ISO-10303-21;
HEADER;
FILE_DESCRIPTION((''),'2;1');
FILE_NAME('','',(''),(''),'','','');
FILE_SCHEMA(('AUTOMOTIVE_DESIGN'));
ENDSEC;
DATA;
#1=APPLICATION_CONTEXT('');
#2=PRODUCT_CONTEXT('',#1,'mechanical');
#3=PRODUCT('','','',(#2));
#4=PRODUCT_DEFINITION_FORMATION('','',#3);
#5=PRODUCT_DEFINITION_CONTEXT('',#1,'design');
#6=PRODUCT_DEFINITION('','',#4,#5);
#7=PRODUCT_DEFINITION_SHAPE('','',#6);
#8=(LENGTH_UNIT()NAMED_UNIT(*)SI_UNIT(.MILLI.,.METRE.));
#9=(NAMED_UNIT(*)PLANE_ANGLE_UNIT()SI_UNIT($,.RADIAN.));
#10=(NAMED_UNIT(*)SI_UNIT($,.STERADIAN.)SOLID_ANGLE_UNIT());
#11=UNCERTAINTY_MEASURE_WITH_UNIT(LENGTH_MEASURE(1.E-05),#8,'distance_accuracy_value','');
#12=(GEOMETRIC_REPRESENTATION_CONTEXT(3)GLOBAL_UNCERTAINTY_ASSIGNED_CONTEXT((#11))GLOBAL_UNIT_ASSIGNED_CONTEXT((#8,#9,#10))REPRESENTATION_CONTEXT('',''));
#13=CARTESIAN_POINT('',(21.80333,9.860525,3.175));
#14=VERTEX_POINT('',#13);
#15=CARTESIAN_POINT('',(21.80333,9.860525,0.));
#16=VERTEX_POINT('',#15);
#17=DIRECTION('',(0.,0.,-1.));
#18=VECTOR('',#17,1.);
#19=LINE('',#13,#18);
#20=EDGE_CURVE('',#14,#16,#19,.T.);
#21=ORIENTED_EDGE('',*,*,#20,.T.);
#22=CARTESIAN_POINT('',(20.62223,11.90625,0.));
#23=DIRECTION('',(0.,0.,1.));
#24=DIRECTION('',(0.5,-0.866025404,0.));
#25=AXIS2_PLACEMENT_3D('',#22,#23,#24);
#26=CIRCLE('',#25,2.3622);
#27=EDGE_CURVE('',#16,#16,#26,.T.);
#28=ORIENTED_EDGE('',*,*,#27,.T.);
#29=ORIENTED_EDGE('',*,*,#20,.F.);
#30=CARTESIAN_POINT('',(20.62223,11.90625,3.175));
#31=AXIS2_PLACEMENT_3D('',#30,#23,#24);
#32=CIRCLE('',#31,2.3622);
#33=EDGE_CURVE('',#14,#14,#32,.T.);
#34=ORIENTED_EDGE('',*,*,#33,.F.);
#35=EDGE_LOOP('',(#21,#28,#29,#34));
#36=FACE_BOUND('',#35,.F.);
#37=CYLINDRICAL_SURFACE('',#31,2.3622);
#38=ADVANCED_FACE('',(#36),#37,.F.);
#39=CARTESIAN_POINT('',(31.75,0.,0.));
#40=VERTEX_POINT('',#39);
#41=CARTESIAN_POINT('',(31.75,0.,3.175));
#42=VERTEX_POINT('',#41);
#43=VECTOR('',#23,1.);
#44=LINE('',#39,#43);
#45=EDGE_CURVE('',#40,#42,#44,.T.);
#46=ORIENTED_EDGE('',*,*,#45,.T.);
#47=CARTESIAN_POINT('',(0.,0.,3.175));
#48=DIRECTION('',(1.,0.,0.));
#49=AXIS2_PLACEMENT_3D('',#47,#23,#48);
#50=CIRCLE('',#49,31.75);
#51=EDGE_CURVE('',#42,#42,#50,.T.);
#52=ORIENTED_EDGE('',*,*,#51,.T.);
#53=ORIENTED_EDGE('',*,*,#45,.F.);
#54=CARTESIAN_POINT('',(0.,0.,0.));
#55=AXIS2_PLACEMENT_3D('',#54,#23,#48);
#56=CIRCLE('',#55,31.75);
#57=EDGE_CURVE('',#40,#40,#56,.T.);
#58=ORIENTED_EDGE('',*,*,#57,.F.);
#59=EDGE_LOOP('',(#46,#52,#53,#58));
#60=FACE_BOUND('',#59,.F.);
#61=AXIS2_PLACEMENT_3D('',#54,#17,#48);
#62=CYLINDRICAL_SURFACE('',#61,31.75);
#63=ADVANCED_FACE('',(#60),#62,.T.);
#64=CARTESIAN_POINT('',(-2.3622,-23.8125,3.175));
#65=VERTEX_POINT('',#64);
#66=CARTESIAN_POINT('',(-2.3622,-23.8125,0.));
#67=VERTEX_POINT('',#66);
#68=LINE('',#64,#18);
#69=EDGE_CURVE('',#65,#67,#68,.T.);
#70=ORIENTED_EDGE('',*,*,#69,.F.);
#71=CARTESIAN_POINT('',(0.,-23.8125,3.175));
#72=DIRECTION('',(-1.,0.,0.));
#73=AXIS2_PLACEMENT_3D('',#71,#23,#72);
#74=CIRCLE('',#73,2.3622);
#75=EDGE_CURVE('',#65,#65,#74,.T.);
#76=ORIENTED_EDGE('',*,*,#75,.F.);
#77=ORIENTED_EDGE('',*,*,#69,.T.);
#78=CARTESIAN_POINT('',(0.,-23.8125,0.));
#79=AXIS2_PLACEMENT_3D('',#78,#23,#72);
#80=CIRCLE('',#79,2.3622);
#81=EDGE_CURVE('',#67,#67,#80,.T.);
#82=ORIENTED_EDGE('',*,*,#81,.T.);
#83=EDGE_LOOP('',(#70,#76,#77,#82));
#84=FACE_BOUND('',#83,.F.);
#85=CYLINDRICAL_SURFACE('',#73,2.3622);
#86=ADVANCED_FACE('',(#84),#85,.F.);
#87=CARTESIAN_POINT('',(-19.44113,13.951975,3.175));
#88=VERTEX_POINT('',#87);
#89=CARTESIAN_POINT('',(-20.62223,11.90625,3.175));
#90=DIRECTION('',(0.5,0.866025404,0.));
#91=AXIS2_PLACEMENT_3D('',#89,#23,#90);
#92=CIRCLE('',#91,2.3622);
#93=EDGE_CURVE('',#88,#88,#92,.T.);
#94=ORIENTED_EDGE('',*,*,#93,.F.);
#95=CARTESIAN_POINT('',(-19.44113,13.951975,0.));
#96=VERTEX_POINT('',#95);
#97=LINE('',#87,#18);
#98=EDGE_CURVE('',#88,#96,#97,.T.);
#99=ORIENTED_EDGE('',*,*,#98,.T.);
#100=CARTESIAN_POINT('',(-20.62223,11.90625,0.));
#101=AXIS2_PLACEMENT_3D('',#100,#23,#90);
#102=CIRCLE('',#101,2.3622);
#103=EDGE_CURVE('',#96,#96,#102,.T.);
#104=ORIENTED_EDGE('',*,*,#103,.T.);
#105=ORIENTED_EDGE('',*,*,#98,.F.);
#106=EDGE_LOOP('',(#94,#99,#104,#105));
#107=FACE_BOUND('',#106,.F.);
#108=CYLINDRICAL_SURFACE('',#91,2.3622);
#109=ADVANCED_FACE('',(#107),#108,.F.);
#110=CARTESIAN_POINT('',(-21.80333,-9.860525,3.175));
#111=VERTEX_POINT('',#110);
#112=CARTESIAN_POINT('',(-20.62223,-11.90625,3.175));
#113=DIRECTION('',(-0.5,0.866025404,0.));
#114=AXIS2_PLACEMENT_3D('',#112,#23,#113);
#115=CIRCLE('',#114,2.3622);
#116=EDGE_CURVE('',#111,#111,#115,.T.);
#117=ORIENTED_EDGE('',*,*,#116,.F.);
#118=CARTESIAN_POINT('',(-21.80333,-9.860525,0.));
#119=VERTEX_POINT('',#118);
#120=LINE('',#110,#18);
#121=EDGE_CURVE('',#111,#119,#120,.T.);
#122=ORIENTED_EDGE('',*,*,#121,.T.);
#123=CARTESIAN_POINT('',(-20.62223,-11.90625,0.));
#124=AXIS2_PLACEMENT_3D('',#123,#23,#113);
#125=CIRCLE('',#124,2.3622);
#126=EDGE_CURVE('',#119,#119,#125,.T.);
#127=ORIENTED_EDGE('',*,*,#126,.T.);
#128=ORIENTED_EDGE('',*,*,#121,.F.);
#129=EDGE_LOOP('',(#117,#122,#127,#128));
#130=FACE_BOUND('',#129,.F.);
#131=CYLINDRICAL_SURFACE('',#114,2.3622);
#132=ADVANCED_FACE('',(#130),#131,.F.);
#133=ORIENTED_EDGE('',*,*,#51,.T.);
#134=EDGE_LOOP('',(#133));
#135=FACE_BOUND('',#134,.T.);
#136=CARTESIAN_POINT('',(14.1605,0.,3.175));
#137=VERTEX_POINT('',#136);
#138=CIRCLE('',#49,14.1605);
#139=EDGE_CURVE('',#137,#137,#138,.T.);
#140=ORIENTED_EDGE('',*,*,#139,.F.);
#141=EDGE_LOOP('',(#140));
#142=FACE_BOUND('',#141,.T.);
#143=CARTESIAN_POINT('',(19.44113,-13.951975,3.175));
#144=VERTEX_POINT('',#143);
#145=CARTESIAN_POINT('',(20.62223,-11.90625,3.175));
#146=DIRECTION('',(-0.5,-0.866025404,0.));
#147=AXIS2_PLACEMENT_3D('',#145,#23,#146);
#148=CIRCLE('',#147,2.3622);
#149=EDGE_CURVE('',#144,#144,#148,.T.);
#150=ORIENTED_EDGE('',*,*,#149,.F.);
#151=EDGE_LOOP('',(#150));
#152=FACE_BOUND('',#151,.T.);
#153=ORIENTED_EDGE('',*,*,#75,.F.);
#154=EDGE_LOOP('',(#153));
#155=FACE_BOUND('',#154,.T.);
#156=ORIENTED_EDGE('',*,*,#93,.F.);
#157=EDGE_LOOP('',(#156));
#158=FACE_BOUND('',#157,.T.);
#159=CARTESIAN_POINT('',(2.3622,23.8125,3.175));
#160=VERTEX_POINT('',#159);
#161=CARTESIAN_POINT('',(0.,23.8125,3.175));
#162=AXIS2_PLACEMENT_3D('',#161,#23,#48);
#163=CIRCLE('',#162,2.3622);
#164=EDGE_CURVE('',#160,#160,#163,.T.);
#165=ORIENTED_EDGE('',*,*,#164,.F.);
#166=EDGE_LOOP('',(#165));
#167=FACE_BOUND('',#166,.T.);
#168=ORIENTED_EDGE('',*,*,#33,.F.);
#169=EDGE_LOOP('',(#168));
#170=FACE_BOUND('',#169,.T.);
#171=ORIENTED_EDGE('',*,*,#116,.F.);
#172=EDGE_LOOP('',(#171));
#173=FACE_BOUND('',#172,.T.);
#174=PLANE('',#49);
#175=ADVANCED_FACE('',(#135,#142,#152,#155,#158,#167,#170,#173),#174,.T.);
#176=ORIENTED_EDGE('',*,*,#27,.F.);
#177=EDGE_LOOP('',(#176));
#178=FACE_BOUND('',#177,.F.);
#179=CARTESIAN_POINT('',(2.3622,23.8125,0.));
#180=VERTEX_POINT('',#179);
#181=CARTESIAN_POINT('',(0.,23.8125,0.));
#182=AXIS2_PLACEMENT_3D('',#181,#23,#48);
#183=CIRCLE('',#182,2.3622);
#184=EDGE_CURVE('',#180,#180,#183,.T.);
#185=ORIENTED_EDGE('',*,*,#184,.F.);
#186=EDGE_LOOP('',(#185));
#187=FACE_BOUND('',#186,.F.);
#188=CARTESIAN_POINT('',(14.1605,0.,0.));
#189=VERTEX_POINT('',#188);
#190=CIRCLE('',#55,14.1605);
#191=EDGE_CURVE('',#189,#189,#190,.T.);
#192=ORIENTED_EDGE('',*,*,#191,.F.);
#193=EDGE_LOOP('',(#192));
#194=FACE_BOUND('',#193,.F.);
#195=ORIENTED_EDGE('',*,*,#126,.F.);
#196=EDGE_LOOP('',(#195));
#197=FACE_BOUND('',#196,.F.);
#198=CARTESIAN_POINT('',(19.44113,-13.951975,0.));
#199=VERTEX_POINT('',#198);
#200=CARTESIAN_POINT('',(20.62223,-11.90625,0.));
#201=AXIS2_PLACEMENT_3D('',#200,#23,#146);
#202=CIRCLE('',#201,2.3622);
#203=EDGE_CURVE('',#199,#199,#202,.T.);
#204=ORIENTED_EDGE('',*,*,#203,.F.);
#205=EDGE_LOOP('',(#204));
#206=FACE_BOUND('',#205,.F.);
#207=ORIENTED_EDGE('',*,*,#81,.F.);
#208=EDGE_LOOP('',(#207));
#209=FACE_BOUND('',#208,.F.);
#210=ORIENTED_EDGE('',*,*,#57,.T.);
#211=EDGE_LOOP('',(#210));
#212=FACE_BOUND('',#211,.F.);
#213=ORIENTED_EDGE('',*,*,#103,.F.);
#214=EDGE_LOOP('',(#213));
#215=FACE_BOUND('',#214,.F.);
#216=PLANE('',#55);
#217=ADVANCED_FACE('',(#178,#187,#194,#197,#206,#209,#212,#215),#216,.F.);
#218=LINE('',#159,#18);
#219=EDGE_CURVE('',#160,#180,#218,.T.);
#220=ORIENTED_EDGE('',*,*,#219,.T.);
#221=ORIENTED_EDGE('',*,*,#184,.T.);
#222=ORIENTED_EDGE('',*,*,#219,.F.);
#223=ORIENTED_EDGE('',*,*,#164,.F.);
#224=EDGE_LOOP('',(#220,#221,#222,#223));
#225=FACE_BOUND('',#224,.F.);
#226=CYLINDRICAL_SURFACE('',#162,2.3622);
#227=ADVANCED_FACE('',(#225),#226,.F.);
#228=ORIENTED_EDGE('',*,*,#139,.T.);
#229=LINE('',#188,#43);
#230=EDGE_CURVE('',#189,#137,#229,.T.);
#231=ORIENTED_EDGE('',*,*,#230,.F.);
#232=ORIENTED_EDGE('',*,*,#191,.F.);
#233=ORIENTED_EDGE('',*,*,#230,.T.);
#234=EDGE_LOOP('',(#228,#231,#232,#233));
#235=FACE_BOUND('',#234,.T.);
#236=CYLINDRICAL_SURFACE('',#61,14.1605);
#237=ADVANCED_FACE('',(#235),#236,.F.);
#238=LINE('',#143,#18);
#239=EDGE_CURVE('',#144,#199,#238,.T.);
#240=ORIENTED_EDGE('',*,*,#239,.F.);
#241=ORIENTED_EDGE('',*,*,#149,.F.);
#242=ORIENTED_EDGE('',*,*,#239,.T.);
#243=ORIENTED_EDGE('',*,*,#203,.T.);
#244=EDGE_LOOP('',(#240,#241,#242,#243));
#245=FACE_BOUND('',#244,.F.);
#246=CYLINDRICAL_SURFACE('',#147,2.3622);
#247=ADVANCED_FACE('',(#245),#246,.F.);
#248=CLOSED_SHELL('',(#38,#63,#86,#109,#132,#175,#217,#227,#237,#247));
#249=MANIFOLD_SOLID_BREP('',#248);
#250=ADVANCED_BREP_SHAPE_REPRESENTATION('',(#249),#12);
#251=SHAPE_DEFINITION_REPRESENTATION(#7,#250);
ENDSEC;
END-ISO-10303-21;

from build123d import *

# Parameters (mm, degrees)
F0_R            = 31.75
F0_R_2          = 14.1605
F1_DEPTH        = 3.175
F2_R            = 2.3622
F3_DEPTH        = 3.176
F3_COPIES_COUNT = 6


# Not quite as in the source:
# - a pattern or mirror of a feature is missing from the dataset's text; its kind, count and spacing are read off the source's solid


with BuildPart() as f1:
    # F0 (on Top) → F1 (new body)
    with BuildSketch(Plane.XY):
        Circle(F0_R)
        Circle(F0_R_2, mode=Mode.SUBTRACT)
    extrude(amount=F1_DEPTH)

    # F2 (on face) → F3 (cut, through all)
    with BuildSketch(Plane.XY.offset(3.175)):
        with Locations((0, 23.8125)):
            Circle(F2_R)
    f3 = extrude(amount=-F3_DEPTH, mode=Mode.SUBTRACT)

    # F3_copies: F3 ×6 about axis
    f3_copies_axis = Axis((0, 0, 0), (0, 0, 1))
    for i in range(1, F3_COPIES_COUNT):
        add(f3.rotate(f3_copies_axis, i * 360 / F3_COPIES_COUNT), mode=Mode.SUBTRACT)


solid = f1.part
